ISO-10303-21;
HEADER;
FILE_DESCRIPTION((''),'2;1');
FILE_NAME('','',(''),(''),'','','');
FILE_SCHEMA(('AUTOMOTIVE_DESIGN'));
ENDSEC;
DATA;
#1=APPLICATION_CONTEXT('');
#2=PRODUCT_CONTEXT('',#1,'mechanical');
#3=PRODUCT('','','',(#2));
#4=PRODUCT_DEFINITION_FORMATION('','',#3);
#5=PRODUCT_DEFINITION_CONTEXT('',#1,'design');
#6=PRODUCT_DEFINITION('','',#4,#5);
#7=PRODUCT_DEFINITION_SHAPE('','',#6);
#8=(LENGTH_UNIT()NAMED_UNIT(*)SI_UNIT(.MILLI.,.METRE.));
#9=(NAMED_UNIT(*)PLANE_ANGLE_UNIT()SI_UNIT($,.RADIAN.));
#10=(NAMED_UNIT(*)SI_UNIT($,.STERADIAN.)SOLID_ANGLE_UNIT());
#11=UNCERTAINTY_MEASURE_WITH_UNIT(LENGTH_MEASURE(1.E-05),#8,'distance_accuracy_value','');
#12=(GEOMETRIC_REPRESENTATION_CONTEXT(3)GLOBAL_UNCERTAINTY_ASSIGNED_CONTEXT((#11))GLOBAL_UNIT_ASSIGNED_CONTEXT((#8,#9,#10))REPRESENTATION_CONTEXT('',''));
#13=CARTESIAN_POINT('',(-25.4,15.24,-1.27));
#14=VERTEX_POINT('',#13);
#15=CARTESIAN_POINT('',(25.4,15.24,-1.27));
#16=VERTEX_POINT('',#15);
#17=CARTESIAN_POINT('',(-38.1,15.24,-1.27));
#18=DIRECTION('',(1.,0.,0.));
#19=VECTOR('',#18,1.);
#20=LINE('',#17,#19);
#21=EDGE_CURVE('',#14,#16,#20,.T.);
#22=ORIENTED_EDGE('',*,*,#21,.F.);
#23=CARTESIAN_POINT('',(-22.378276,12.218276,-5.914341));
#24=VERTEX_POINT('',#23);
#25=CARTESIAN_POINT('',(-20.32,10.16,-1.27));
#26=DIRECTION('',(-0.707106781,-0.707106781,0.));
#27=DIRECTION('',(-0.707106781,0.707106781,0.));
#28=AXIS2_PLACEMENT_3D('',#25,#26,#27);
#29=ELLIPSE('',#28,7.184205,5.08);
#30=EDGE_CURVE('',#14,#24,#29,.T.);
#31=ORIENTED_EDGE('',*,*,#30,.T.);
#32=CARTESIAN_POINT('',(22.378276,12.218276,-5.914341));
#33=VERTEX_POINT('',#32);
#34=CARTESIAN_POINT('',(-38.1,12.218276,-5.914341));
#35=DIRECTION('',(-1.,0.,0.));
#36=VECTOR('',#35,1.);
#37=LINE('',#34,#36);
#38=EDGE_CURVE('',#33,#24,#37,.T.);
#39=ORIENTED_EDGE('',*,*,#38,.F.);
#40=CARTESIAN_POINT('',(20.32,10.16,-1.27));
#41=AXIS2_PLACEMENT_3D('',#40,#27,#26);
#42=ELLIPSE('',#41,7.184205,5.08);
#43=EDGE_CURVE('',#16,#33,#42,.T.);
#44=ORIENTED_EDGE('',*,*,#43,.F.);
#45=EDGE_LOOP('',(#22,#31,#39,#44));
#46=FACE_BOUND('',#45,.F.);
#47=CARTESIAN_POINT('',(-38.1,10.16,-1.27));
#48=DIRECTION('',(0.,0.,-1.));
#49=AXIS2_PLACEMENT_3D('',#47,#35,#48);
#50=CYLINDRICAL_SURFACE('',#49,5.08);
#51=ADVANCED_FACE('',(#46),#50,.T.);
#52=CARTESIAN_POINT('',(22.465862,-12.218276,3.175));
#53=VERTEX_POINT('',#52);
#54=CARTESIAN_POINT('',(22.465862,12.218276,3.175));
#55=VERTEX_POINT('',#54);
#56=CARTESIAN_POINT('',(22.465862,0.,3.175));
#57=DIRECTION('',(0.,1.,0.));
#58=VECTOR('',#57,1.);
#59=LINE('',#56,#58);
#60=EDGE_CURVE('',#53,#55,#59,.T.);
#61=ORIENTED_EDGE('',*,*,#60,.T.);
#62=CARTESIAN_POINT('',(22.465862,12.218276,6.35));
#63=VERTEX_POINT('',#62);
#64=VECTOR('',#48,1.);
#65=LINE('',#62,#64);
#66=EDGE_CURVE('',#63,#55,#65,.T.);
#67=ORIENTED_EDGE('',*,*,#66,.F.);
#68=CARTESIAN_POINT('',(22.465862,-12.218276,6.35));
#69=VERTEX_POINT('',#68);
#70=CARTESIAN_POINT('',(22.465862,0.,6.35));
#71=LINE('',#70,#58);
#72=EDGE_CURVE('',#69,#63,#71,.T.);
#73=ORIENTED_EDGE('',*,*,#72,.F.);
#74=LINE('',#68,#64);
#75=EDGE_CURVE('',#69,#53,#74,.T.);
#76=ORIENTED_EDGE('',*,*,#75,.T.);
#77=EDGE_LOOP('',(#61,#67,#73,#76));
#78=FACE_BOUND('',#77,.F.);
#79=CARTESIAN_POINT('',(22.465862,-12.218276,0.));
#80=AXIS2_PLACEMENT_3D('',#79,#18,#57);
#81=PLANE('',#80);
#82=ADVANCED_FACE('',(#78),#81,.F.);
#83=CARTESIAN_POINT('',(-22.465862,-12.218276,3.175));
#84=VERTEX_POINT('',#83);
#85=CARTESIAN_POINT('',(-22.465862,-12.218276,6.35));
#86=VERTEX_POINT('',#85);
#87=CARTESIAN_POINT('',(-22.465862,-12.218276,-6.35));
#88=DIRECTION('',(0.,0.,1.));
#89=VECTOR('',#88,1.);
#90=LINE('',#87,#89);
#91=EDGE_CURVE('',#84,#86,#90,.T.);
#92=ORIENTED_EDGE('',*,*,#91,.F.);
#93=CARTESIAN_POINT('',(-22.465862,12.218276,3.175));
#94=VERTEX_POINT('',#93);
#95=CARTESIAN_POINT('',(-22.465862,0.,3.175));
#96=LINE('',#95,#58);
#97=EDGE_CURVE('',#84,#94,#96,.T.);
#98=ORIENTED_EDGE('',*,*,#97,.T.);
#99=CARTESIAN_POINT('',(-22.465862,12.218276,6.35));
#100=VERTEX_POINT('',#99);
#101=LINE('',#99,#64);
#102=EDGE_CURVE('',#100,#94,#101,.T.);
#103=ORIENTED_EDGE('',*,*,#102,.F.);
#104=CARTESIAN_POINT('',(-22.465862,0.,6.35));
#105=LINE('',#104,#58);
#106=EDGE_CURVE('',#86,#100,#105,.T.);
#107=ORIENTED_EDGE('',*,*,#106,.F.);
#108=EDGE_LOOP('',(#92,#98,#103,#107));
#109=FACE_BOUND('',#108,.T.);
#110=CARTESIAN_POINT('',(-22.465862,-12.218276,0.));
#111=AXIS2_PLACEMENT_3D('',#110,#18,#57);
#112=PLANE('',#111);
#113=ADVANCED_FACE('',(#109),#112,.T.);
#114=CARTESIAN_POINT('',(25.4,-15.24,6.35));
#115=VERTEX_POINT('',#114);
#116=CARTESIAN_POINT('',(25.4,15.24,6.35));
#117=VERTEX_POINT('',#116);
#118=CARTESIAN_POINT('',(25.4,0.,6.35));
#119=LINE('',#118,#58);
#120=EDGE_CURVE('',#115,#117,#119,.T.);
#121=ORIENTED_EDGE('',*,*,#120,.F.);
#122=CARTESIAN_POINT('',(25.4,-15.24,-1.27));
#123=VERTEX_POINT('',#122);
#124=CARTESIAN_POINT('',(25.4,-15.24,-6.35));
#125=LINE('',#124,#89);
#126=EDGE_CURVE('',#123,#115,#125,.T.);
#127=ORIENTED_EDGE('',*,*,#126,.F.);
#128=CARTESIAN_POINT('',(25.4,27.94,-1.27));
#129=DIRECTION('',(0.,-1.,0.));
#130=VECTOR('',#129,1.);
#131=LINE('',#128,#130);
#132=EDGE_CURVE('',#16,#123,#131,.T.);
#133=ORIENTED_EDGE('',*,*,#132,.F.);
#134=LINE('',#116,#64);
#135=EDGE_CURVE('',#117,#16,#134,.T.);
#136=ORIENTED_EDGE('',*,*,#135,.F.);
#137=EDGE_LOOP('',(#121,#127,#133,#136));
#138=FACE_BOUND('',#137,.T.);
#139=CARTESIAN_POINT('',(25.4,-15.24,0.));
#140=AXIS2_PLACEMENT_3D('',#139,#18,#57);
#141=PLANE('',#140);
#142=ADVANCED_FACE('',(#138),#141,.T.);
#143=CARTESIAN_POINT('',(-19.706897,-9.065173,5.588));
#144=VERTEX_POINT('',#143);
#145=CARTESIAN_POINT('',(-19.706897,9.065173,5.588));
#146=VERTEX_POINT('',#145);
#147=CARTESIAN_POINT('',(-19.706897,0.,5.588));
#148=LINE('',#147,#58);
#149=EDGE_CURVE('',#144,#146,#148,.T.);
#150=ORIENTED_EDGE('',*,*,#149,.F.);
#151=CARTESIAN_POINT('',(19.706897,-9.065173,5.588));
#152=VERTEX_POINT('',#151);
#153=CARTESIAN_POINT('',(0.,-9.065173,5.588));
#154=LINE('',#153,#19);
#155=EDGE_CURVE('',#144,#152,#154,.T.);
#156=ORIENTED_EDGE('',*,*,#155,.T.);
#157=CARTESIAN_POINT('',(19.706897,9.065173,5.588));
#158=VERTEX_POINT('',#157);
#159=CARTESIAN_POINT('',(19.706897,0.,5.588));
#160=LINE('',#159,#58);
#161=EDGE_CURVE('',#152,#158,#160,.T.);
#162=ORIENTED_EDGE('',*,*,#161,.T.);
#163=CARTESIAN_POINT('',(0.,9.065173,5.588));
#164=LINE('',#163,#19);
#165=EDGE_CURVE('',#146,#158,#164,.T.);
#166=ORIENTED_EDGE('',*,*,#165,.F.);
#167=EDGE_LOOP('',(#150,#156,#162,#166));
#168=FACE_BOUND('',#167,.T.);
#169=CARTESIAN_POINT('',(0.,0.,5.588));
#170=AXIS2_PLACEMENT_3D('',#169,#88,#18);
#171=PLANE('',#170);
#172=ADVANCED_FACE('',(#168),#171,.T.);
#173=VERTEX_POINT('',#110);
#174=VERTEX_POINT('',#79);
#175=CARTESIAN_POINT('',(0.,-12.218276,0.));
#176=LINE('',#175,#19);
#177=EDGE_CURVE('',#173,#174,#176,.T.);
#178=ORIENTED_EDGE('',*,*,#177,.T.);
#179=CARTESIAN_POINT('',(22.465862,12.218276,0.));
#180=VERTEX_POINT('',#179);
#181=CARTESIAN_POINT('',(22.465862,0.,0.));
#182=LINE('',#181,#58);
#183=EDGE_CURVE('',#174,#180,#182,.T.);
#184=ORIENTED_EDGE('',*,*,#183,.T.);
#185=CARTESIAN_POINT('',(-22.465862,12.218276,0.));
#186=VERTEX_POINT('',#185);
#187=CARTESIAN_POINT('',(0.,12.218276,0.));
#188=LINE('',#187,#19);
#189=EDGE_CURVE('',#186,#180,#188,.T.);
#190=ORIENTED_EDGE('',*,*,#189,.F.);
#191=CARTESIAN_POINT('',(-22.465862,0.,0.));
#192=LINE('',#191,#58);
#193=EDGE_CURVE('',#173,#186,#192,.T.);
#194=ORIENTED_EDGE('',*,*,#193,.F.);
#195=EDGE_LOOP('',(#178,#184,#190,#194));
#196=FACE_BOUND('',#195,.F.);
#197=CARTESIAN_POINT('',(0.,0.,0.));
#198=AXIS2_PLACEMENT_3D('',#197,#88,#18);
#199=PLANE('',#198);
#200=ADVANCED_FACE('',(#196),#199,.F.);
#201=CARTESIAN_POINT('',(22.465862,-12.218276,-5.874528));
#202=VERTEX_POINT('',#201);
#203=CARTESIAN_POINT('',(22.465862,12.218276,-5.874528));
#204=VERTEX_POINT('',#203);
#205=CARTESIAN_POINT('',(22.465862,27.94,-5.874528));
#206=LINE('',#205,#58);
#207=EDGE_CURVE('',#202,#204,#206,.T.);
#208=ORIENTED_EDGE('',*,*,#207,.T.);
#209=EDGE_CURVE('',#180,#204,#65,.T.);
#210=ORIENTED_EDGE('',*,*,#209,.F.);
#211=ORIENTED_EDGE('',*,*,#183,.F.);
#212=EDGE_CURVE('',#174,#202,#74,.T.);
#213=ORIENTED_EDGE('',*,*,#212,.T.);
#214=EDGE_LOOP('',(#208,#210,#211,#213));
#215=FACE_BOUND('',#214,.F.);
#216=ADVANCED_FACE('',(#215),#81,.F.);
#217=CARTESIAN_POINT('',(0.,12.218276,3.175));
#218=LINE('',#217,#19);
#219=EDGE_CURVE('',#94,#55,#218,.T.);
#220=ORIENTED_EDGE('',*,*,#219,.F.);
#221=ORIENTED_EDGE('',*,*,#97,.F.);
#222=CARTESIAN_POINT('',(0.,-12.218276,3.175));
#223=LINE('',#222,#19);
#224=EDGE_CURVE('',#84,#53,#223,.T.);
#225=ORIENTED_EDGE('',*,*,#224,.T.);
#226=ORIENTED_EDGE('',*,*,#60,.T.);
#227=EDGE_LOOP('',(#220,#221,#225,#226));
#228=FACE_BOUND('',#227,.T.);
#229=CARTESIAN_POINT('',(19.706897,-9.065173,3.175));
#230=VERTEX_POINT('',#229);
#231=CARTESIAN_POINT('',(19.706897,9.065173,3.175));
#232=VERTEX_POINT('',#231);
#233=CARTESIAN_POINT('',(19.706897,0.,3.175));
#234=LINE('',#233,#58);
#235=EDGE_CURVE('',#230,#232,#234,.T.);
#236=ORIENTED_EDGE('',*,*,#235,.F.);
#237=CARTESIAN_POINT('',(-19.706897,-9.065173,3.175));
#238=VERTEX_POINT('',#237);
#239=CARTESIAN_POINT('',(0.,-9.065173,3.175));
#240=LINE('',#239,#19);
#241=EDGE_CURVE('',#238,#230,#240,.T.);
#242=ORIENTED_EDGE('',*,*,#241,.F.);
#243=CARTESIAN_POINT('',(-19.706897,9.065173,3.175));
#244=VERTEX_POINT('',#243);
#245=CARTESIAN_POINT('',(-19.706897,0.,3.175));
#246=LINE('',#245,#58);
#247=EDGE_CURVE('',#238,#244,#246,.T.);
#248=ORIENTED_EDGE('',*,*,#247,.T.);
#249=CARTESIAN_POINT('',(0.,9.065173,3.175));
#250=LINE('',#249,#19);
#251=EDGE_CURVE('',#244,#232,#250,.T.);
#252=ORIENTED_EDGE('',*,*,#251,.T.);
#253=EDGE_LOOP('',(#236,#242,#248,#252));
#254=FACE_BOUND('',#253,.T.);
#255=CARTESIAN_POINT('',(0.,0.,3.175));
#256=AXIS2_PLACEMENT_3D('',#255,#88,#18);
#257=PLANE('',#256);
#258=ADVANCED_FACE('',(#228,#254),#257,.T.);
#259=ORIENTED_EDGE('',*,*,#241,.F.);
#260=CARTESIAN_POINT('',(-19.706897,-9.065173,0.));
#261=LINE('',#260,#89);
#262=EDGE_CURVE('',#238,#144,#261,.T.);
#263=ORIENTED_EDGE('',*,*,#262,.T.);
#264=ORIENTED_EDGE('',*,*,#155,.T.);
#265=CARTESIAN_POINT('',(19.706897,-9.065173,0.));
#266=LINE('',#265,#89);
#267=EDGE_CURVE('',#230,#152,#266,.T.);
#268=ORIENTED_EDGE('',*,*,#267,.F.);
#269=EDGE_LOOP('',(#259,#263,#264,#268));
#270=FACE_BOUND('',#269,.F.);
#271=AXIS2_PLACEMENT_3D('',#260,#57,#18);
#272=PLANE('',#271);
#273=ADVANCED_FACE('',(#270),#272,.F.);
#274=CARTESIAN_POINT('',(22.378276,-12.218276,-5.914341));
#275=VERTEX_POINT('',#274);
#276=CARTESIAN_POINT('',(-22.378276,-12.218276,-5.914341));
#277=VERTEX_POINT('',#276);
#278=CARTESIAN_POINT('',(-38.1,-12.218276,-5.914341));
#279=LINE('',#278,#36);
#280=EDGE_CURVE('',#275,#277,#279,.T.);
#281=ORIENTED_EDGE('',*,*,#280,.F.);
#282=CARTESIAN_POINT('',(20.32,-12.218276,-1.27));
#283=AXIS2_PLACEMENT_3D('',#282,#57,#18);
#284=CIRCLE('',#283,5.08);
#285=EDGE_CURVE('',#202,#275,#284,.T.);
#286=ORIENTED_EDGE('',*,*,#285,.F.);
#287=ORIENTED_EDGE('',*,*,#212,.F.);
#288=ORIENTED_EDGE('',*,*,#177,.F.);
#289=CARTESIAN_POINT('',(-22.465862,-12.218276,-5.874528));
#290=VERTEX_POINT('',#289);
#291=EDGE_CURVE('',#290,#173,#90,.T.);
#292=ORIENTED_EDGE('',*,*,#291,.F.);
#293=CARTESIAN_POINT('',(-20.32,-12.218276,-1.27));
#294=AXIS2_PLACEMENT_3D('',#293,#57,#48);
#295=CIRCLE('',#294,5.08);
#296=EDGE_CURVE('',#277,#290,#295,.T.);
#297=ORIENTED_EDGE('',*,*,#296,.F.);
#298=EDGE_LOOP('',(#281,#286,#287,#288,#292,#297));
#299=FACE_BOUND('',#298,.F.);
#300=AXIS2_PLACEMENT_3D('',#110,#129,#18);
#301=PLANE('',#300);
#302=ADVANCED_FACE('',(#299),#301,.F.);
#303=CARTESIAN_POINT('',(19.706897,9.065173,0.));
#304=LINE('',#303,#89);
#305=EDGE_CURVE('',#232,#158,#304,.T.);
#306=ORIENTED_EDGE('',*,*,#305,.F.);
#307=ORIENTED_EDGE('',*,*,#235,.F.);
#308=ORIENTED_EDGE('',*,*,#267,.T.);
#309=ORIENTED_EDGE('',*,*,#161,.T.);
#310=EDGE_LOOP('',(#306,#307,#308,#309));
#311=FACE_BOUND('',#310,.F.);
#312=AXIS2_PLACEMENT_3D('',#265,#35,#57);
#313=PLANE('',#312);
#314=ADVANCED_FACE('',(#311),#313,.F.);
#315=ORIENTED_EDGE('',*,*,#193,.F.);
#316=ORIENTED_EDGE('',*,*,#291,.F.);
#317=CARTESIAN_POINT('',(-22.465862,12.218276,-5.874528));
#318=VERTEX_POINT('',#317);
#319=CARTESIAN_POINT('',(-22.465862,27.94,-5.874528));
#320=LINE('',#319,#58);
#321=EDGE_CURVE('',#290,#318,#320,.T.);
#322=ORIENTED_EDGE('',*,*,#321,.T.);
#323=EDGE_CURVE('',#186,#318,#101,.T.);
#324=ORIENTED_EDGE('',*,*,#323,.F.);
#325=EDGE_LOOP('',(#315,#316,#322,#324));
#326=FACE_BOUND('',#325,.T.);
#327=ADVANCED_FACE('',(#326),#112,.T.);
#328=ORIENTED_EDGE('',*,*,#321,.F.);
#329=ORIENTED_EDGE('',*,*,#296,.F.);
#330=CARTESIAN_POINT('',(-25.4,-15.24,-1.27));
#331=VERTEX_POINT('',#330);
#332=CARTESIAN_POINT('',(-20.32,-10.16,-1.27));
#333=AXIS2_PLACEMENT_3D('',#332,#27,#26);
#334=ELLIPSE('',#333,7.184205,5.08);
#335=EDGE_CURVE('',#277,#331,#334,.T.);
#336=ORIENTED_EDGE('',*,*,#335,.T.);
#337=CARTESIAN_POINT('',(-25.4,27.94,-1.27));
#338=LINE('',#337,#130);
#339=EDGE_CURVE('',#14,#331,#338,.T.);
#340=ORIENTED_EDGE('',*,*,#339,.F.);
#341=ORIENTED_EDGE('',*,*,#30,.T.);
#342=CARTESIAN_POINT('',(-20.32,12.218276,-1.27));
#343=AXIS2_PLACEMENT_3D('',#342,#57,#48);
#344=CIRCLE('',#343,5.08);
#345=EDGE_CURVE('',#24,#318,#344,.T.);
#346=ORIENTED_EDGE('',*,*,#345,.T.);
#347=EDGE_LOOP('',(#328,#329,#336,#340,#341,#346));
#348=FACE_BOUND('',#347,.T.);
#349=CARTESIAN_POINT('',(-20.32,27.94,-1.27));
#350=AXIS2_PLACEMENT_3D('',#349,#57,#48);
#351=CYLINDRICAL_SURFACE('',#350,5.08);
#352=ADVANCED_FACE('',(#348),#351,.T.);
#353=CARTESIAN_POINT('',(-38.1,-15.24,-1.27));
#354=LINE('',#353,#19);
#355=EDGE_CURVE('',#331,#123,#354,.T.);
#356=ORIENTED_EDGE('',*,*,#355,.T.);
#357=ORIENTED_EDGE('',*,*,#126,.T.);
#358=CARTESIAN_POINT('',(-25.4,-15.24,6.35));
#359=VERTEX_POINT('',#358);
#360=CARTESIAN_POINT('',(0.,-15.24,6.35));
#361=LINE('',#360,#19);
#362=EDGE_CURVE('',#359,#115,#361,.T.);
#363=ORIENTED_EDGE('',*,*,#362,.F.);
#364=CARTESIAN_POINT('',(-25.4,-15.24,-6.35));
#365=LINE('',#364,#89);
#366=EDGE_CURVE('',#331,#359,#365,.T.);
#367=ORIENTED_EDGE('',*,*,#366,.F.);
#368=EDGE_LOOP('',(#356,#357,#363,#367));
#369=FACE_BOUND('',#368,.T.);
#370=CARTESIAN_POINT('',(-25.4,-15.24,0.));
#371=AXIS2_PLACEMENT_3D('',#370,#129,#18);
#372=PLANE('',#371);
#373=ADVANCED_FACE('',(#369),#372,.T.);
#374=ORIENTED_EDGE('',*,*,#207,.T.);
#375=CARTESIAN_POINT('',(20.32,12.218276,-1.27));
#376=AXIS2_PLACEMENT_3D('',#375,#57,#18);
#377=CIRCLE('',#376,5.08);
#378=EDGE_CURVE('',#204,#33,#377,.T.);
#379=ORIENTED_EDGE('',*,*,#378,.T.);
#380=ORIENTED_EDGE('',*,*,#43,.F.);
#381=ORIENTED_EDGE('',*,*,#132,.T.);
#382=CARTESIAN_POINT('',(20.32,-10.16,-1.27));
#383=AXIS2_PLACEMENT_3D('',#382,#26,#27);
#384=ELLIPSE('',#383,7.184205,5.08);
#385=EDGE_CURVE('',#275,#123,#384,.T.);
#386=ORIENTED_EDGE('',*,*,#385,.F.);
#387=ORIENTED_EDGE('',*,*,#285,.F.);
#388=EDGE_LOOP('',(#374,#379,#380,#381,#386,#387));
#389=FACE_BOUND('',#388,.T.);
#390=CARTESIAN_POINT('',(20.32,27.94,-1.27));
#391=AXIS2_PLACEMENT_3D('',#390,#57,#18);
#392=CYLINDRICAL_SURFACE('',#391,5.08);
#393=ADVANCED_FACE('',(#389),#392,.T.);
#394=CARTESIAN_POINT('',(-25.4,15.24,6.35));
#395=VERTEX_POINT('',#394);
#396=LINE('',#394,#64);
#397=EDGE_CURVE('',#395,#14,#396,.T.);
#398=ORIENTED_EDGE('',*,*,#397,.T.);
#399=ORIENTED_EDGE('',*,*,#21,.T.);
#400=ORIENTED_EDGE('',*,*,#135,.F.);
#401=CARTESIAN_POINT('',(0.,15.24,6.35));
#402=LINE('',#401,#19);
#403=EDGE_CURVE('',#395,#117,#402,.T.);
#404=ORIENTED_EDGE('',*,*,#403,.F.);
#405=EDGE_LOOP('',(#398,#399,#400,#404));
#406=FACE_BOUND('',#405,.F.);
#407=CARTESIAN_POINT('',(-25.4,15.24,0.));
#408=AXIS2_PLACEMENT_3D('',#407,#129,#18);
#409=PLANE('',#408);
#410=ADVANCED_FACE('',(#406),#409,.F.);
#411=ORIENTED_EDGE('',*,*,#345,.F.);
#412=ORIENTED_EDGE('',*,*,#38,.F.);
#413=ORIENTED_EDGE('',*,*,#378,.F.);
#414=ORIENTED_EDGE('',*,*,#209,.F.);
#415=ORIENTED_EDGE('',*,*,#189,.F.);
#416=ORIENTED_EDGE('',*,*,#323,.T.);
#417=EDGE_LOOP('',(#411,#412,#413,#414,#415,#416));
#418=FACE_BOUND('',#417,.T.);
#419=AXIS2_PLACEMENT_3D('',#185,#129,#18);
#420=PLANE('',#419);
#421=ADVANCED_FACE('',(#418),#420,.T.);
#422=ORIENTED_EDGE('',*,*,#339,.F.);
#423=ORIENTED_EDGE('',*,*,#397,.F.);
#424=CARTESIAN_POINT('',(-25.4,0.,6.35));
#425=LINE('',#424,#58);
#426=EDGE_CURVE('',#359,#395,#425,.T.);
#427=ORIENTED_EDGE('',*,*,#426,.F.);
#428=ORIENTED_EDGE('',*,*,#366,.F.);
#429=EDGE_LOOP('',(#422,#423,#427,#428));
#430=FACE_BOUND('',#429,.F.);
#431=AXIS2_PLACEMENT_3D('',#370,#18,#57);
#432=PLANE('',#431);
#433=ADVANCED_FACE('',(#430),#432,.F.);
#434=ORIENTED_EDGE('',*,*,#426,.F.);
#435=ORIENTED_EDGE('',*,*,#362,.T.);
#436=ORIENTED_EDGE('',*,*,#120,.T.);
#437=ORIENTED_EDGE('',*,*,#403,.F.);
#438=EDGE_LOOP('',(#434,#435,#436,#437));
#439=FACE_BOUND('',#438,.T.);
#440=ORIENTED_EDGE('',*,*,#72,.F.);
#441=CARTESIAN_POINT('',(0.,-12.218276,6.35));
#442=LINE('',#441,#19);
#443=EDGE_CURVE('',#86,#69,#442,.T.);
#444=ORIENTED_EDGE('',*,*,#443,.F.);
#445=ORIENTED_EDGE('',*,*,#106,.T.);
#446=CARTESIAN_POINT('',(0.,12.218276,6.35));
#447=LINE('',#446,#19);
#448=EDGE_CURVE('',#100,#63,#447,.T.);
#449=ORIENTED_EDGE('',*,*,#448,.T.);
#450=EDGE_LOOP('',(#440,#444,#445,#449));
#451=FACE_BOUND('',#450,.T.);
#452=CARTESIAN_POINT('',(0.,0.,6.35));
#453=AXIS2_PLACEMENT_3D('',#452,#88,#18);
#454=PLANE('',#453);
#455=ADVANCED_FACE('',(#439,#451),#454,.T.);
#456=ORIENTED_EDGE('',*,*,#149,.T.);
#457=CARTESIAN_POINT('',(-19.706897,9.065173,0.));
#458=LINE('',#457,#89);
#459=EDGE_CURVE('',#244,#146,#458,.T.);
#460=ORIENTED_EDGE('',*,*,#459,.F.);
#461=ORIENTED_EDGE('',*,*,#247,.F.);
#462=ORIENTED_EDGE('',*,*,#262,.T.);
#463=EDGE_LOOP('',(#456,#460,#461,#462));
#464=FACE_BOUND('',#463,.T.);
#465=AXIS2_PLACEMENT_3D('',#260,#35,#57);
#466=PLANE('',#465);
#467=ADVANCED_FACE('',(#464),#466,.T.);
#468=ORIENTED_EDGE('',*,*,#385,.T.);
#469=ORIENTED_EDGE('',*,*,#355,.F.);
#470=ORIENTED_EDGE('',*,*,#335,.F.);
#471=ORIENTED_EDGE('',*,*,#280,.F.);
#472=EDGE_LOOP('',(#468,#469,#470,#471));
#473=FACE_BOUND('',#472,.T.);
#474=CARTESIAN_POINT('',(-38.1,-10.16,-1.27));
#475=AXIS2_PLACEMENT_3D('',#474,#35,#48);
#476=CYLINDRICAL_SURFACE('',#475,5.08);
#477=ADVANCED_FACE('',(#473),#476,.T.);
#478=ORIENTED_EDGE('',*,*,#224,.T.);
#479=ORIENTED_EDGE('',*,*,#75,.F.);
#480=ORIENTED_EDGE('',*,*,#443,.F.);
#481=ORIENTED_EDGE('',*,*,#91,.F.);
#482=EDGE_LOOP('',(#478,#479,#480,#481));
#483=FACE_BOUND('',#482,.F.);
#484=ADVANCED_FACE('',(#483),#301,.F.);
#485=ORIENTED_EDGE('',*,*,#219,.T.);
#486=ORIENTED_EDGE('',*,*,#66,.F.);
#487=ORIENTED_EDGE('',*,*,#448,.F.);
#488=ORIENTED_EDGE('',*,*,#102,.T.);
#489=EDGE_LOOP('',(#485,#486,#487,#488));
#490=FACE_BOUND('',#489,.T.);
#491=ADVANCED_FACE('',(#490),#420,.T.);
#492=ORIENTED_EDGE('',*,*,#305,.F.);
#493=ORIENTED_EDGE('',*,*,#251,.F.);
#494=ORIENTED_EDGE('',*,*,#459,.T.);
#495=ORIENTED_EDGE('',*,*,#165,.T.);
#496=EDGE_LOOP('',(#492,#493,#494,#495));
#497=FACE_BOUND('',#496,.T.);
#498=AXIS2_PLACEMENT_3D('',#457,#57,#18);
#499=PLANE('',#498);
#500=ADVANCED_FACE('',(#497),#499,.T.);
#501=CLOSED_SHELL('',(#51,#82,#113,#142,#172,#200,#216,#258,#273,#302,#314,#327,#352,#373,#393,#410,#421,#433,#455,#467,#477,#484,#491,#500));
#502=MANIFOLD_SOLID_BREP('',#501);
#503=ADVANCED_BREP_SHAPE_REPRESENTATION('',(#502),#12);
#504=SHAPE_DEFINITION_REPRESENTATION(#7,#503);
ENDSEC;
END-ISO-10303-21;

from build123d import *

# Parameters (mm, degrees)
F0_W        = 50.8
F0_H        = 30.48
F0_W_2      = 44.9317246675
F0_H_2      = 24.4365520775
F1_DEPTH    = 6.35
F0_W_3      = 39.4137948751
F0_H_3      = 18.13034527
F2_DEPTH    = 3.175
F3_DEPTH    = 5.588
F4_T1_DEPTH = 76.2
F4_T3_DEPTH = 55.88


# Not quite as in the source:
# - a fillet or chamfer that OpenCascade refuses, or shapes differently, is made with other operations: its cross-section is extruded or revolved along the edge and cut away or added


with BuildPart() as f1:
    # F0 (on Top) → F1 (new body, symmetric)
    with BuildSketch(Plane.XY):
        Rectangle(F0_W, F0_H)
        Rectangle(F0_W_2, F0_H_2, mode=Mode.SUBTRACT)
    extrude(amount=F1_DEPTH, both=True)

    # F0 (on Top) → F2 (join)
    with BuildSketch(Plane.XY):
        Rectangle(F0_W_2, F0_H_2)
        Rectangle(F0_W_3, F0_H_3, mode=Mode.SUBTRACT)
    extrude(amount=F2_DEPTH)

    # F0 (on Top) → F3 (join)
    with BuildSketch(Plane.XY):
        Rectangle(F0_W_3, F0_H_3)
    extrude(amount=F3_DEPTH)

    # F4: fillet of radius 5.08 on 4 edges, made by hand

    # F4_s2 → F4_t1 (cut)
    with BuildSketch(Plane.YZ.offset(-38.1)):
        with BuildLine():
            ThreePointArc((-10.16, -6.35), (-13.7521024484, -4.8621024484), (-15.24, -1.27))
            Line((-15.24, -1.27), (-15.24, -6.35))
            Line((-15.24, -6.35), (-10.16, -6.35))
        make_face()
        with BuildLine():
            ThreePointArc((10.16, -6.35), (13.7521024484, -4.8621024484), (15.24, -1.27))
            Line((15.24, -1.27), (15.24, -6.35))
            Line((15.24, -6.35), (10.16, -6.35))
        make_face()
    extrude(amount=F4_T1_DEPTH, mode=Mode.SUBTRACT)

    # F4_s4 → F4_t3 (cut)
    with BuildSketch(Plane.XZ.offset(-27.94)):
        with BuildLine():
            ThreePointArc((25.4, -1.27), (23.9121024484, -4.8621024484), (20.32, -6.35))
            Line((20.32, -6.35), (25.4, -6.35))
            Line((25.4, -6.35), (25.4, -1.27))
        make_face()
        with BuildLine():
            ThreePointArc((-20.32, -6.35), (-23.9121024484, -4.8621024484), (-25.4, -1.27))
            Line((-25.4, -1.27), (-25.4, -6.35))
            Line((-25.4, -6.35), (-20.32, -6.35))
        make_face()
    extrude(amount=F4_T3_DEPTH, mode=Mode.SUBTRACT)


solid = f1.part
